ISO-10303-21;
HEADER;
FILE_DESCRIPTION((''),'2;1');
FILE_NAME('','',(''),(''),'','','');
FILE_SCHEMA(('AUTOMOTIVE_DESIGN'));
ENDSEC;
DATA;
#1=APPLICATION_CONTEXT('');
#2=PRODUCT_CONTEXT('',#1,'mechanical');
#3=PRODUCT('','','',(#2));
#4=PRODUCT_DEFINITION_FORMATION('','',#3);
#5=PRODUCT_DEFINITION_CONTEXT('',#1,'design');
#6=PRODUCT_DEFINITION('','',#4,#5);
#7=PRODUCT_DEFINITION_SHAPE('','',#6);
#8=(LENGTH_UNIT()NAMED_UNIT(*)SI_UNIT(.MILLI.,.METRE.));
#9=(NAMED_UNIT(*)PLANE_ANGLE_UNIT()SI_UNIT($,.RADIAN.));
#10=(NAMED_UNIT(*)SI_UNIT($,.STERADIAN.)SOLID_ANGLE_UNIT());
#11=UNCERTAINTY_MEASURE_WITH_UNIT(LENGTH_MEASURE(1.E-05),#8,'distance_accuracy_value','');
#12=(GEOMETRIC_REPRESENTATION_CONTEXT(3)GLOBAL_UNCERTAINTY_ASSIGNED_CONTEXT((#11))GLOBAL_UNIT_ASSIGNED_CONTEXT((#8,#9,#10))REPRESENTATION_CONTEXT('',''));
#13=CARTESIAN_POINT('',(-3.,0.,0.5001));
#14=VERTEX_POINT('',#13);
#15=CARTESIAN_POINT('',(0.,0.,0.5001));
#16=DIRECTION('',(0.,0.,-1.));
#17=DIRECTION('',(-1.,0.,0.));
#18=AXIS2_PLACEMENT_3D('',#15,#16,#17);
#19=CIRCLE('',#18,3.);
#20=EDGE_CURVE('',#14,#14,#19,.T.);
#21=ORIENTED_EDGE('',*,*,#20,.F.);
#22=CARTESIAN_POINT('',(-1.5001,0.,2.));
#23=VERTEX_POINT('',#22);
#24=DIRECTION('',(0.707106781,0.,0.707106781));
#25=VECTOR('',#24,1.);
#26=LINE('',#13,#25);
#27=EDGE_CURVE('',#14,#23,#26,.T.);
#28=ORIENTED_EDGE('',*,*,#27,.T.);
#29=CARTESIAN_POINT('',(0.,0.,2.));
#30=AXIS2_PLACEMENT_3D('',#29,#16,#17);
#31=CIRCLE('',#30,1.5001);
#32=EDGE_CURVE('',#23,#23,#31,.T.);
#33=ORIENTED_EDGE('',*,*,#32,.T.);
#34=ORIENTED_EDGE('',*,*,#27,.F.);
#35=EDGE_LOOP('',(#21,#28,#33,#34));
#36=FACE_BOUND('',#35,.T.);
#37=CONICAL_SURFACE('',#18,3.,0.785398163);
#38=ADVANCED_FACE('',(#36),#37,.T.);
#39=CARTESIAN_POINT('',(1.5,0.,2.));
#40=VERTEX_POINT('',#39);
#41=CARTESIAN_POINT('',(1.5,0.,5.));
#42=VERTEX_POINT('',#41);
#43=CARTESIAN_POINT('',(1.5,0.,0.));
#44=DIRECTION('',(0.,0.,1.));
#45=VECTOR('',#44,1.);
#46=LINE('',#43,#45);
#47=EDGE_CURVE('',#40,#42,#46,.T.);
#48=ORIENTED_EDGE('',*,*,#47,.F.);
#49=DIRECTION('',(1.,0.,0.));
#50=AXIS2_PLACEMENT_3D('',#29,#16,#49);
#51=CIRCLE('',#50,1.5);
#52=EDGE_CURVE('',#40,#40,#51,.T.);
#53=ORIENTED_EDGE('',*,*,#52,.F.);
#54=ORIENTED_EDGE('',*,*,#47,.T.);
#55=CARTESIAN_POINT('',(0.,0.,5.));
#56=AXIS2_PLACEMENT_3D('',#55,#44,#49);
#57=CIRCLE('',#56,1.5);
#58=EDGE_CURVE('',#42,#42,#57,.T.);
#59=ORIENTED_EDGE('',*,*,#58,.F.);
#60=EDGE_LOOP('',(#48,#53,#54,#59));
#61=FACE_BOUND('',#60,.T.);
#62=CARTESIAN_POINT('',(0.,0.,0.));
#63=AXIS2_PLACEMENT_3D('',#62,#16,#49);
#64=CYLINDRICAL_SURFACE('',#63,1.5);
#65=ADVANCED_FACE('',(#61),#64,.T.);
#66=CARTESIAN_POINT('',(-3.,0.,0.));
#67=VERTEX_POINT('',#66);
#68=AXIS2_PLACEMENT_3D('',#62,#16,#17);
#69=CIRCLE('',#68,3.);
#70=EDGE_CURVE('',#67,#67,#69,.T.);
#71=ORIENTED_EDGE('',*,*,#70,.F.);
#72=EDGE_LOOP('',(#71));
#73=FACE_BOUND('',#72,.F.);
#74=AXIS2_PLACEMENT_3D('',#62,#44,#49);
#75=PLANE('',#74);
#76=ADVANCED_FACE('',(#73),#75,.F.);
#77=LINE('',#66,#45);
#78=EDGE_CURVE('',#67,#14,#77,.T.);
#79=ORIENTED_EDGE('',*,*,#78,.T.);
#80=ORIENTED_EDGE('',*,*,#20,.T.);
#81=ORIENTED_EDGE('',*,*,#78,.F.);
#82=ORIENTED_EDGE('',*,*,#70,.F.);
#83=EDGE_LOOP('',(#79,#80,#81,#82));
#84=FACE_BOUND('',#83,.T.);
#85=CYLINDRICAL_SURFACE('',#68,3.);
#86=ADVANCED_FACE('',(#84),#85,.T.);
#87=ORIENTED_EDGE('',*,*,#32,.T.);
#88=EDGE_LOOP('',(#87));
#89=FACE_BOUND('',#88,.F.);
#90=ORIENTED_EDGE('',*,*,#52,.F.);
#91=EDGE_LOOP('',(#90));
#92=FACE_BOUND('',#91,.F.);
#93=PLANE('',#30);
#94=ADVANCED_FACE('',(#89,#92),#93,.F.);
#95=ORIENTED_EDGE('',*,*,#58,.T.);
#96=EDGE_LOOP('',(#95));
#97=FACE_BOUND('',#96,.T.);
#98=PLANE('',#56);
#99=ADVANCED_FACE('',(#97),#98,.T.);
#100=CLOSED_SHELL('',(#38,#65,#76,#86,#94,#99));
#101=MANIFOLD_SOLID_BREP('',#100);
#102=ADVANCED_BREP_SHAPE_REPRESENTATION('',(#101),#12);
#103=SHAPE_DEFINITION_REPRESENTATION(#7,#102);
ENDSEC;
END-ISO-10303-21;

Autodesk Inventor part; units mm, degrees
ref_plane "YZ Plane" through (0, 0, 0) normal (1, 0, 0) x (0, 1, 0)
ref_plane "XZ Plane" through (0, 0, 0) normal (0, 1, 0) x (-1, 0, 0)
ref_plane "XY Plane" through (0, 0, 0) normal (0, 0, 1) x (1, 0, 0)
sketch "スケッチ1" plane through (0, 0, 0) normal (0, 0, 1) x (1, 0, 0)
  circle A0 centre (0, 0) radius 1.5
  dimension "d0" = 3
extrude "押し出し1" add sketch "スケッチ1" along normal blind 5
sketch "スケッチ2" plane through (0, 0, 0) normal (0, 0, -1) x (-1, 0, 0)
  circle A0 centre (0, 0) radius 3
  dimension "d3" = 6
extrude "押し出し2" add sketch "スケッチ2" against normal blind 2
thread "ねじ1" size "M3x0.5" class "6g" standard "ANSI Metric M Profile" full length
chamfer "面取り1" distance 1.5 angle 45 1 edges at (3, 0, 2)
properties part number "ネジ皿m3,05" material "鋼、高強度、低合金"
